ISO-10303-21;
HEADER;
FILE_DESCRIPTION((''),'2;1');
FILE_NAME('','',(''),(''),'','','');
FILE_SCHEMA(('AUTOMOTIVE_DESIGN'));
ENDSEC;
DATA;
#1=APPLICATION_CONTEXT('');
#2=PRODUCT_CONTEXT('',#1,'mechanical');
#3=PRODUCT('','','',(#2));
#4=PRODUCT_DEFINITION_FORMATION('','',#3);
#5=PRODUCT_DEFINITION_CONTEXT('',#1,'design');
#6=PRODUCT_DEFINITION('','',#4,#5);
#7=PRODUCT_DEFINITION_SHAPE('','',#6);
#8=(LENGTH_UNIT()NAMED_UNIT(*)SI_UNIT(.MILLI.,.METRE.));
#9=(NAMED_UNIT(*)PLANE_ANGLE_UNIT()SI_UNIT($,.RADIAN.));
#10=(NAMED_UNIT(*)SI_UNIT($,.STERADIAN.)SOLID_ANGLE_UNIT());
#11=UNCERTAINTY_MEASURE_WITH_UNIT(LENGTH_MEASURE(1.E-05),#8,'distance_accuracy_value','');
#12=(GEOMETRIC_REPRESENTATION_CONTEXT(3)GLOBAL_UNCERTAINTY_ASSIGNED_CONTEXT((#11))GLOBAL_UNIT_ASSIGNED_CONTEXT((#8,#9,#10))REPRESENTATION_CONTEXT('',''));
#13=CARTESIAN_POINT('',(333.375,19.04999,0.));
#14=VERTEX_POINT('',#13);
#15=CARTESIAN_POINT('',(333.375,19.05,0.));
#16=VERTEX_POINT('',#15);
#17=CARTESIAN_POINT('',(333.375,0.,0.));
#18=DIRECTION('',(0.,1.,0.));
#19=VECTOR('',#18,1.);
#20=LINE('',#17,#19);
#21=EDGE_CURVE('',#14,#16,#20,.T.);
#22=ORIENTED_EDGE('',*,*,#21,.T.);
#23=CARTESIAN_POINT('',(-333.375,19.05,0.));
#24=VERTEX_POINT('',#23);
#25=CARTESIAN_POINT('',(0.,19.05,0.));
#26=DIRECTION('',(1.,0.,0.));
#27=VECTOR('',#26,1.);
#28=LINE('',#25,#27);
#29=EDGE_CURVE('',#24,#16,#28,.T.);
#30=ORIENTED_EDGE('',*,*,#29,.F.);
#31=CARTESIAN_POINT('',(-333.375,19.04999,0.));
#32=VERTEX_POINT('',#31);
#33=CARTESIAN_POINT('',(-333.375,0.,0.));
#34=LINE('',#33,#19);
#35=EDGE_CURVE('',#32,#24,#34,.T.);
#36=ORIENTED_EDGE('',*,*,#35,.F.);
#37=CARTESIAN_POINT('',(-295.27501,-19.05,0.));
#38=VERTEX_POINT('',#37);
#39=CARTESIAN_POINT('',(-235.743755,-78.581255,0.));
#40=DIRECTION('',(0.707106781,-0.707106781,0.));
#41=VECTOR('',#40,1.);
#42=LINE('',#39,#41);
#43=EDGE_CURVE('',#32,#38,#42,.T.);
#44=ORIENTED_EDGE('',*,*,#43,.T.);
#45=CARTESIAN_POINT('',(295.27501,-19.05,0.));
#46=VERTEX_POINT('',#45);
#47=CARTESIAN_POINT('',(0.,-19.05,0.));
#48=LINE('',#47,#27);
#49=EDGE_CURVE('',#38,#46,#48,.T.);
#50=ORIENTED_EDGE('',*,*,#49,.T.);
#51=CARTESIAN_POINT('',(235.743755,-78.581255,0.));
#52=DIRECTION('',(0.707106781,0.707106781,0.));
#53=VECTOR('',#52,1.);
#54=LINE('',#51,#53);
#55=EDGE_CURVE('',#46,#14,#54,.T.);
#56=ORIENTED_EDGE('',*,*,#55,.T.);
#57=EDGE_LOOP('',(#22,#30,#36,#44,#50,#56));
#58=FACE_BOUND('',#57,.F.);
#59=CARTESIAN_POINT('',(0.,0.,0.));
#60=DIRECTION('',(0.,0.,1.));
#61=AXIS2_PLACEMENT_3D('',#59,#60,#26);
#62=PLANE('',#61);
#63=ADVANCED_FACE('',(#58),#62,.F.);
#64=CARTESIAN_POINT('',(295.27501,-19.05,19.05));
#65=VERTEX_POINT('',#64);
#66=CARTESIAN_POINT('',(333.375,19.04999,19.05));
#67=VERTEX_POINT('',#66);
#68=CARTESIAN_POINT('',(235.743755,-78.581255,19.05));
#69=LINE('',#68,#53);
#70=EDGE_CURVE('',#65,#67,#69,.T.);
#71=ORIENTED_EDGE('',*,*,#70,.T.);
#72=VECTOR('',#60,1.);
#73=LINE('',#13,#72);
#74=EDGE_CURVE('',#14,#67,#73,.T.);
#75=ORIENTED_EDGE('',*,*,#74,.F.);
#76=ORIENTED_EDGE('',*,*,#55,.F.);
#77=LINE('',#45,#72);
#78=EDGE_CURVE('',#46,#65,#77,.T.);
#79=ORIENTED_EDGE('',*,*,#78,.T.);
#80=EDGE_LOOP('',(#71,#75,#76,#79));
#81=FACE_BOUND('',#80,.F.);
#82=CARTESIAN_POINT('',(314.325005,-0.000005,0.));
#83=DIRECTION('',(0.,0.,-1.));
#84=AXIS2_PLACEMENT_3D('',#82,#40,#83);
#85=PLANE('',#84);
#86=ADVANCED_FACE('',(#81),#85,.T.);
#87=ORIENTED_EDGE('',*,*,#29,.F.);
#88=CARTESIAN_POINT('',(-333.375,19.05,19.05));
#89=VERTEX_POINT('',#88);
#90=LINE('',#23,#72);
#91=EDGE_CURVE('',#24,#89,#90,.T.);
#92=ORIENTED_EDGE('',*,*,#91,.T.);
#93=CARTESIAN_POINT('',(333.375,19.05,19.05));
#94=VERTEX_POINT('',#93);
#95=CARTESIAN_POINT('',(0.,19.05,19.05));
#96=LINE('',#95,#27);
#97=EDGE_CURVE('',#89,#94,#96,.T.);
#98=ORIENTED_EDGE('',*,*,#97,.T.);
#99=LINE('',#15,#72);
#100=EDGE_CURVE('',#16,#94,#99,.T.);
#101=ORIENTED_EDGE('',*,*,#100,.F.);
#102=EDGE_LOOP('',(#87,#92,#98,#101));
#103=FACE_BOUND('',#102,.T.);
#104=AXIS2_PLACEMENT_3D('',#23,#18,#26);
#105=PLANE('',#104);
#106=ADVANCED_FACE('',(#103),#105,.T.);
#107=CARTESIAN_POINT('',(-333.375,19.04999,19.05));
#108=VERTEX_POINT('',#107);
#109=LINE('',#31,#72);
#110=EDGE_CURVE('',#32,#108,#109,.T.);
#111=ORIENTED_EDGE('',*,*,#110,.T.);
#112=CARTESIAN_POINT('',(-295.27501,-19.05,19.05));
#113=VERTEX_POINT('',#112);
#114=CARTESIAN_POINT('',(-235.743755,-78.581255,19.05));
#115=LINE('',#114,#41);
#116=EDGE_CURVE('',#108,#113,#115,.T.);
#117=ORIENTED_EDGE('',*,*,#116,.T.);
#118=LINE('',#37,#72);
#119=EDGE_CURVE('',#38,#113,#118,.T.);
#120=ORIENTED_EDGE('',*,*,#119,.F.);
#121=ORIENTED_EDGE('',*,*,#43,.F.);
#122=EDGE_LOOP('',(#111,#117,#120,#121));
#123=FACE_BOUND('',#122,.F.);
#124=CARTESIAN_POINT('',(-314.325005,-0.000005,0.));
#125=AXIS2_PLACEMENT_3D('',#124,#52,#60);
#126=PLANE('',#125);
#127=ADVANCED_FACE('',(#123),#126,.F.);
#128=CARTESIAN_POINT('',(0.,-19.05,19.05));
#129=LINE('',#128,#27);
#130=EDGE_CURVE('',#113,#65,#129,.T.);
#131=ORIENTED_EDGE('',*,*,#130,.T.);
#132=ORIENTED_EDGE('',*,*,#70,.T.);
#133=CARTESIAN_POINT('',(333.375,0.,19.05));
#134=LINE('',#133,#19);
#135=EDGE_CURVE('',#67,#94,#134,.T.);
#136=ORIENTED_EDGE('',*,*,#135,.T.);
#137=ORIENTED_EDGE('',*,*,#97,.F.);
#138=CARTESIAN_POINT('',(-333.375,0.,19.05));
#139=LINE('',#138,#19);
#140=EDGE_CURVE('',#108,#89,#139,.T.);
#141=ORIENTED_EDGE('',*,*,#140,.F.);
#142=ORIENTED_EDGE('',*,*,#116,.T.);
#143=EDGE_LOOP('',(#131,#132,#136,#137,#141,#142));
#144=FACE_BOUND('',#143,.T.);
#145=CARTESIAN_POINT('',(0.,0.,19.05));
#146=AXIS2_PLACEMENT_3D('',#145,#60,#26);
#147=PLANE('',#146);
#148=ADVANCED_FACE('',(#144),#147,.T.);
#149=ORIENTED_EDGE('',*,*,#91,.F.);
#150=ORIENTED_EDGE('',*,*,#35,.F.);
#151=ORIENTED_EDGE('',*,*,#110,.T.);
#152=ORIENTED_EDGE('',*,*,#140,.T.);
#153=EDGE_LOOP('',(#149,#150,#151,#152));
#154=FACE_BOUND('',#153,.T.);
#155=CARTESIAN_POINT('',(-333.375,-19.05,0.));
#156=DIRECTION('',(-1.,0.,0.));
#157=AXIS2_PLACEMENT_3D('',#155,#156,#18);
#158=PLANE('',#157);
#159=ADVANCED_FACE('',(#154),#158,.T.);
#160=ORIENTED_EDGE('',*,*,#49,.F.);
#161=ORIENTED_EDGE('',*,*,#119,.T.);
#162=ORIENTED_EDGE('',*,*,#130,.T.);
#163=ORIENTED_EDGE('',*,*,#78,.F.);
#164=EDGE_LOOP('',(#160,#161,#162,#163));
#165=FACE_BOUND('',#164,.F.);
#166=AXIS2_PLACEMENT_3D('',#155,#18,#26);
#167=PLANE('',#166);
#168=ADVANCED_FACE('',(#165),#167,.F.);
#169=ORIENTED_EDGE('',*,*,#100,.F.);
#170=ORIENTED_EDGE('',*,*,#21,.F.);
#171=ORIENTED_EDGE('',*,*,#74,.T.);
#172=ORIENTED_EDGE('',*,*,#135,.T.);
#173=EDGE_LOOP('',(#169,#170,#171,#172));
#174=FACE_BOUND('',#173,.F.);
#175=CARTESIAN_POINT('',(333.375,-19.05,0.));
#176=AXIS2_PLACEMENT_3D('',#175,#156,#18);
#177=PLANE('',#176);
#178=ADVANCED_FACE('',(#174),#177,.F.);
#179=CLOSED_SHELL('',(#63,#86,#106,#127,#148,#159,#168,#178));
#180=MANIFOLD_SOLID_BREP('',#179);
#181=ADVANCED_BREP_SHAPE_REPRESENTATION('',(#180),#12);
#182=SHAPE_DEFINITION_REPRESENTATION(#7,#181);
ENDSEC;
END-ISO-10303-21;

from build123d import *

# Parameters (mm, degrees)
F0_W     = 666.75
F0_H     = 38.1
F1_DEPTH = 19.05
F2_SIZE  = 38.09999


# Not quite as in the source:
# - a fillet or chamfer is up to 0.001 mm smaller than in the source, because OpenCascade refuses the exact size


with BuildPart() as f1:
    # F0 (on Top) → F1 (new body)
    with BuildSketch(Plane.XY):
        Rectangle(F0_W, F0_H)
    extrude(amount=F1_DEPTH)

    # F2 (size 38.1 in the source; OpenCascade refuses exactly that, so slightly less here)
    f2_edges = [f1.edges().sort_by_distance(p)[0] for p in [
        (333.375, -19.05, 9.525),
        (-333.375, -19.05, 9.525),
    ]]
    chamfer(f2_edges, length=F2_SIZE)


solid = f1.part
